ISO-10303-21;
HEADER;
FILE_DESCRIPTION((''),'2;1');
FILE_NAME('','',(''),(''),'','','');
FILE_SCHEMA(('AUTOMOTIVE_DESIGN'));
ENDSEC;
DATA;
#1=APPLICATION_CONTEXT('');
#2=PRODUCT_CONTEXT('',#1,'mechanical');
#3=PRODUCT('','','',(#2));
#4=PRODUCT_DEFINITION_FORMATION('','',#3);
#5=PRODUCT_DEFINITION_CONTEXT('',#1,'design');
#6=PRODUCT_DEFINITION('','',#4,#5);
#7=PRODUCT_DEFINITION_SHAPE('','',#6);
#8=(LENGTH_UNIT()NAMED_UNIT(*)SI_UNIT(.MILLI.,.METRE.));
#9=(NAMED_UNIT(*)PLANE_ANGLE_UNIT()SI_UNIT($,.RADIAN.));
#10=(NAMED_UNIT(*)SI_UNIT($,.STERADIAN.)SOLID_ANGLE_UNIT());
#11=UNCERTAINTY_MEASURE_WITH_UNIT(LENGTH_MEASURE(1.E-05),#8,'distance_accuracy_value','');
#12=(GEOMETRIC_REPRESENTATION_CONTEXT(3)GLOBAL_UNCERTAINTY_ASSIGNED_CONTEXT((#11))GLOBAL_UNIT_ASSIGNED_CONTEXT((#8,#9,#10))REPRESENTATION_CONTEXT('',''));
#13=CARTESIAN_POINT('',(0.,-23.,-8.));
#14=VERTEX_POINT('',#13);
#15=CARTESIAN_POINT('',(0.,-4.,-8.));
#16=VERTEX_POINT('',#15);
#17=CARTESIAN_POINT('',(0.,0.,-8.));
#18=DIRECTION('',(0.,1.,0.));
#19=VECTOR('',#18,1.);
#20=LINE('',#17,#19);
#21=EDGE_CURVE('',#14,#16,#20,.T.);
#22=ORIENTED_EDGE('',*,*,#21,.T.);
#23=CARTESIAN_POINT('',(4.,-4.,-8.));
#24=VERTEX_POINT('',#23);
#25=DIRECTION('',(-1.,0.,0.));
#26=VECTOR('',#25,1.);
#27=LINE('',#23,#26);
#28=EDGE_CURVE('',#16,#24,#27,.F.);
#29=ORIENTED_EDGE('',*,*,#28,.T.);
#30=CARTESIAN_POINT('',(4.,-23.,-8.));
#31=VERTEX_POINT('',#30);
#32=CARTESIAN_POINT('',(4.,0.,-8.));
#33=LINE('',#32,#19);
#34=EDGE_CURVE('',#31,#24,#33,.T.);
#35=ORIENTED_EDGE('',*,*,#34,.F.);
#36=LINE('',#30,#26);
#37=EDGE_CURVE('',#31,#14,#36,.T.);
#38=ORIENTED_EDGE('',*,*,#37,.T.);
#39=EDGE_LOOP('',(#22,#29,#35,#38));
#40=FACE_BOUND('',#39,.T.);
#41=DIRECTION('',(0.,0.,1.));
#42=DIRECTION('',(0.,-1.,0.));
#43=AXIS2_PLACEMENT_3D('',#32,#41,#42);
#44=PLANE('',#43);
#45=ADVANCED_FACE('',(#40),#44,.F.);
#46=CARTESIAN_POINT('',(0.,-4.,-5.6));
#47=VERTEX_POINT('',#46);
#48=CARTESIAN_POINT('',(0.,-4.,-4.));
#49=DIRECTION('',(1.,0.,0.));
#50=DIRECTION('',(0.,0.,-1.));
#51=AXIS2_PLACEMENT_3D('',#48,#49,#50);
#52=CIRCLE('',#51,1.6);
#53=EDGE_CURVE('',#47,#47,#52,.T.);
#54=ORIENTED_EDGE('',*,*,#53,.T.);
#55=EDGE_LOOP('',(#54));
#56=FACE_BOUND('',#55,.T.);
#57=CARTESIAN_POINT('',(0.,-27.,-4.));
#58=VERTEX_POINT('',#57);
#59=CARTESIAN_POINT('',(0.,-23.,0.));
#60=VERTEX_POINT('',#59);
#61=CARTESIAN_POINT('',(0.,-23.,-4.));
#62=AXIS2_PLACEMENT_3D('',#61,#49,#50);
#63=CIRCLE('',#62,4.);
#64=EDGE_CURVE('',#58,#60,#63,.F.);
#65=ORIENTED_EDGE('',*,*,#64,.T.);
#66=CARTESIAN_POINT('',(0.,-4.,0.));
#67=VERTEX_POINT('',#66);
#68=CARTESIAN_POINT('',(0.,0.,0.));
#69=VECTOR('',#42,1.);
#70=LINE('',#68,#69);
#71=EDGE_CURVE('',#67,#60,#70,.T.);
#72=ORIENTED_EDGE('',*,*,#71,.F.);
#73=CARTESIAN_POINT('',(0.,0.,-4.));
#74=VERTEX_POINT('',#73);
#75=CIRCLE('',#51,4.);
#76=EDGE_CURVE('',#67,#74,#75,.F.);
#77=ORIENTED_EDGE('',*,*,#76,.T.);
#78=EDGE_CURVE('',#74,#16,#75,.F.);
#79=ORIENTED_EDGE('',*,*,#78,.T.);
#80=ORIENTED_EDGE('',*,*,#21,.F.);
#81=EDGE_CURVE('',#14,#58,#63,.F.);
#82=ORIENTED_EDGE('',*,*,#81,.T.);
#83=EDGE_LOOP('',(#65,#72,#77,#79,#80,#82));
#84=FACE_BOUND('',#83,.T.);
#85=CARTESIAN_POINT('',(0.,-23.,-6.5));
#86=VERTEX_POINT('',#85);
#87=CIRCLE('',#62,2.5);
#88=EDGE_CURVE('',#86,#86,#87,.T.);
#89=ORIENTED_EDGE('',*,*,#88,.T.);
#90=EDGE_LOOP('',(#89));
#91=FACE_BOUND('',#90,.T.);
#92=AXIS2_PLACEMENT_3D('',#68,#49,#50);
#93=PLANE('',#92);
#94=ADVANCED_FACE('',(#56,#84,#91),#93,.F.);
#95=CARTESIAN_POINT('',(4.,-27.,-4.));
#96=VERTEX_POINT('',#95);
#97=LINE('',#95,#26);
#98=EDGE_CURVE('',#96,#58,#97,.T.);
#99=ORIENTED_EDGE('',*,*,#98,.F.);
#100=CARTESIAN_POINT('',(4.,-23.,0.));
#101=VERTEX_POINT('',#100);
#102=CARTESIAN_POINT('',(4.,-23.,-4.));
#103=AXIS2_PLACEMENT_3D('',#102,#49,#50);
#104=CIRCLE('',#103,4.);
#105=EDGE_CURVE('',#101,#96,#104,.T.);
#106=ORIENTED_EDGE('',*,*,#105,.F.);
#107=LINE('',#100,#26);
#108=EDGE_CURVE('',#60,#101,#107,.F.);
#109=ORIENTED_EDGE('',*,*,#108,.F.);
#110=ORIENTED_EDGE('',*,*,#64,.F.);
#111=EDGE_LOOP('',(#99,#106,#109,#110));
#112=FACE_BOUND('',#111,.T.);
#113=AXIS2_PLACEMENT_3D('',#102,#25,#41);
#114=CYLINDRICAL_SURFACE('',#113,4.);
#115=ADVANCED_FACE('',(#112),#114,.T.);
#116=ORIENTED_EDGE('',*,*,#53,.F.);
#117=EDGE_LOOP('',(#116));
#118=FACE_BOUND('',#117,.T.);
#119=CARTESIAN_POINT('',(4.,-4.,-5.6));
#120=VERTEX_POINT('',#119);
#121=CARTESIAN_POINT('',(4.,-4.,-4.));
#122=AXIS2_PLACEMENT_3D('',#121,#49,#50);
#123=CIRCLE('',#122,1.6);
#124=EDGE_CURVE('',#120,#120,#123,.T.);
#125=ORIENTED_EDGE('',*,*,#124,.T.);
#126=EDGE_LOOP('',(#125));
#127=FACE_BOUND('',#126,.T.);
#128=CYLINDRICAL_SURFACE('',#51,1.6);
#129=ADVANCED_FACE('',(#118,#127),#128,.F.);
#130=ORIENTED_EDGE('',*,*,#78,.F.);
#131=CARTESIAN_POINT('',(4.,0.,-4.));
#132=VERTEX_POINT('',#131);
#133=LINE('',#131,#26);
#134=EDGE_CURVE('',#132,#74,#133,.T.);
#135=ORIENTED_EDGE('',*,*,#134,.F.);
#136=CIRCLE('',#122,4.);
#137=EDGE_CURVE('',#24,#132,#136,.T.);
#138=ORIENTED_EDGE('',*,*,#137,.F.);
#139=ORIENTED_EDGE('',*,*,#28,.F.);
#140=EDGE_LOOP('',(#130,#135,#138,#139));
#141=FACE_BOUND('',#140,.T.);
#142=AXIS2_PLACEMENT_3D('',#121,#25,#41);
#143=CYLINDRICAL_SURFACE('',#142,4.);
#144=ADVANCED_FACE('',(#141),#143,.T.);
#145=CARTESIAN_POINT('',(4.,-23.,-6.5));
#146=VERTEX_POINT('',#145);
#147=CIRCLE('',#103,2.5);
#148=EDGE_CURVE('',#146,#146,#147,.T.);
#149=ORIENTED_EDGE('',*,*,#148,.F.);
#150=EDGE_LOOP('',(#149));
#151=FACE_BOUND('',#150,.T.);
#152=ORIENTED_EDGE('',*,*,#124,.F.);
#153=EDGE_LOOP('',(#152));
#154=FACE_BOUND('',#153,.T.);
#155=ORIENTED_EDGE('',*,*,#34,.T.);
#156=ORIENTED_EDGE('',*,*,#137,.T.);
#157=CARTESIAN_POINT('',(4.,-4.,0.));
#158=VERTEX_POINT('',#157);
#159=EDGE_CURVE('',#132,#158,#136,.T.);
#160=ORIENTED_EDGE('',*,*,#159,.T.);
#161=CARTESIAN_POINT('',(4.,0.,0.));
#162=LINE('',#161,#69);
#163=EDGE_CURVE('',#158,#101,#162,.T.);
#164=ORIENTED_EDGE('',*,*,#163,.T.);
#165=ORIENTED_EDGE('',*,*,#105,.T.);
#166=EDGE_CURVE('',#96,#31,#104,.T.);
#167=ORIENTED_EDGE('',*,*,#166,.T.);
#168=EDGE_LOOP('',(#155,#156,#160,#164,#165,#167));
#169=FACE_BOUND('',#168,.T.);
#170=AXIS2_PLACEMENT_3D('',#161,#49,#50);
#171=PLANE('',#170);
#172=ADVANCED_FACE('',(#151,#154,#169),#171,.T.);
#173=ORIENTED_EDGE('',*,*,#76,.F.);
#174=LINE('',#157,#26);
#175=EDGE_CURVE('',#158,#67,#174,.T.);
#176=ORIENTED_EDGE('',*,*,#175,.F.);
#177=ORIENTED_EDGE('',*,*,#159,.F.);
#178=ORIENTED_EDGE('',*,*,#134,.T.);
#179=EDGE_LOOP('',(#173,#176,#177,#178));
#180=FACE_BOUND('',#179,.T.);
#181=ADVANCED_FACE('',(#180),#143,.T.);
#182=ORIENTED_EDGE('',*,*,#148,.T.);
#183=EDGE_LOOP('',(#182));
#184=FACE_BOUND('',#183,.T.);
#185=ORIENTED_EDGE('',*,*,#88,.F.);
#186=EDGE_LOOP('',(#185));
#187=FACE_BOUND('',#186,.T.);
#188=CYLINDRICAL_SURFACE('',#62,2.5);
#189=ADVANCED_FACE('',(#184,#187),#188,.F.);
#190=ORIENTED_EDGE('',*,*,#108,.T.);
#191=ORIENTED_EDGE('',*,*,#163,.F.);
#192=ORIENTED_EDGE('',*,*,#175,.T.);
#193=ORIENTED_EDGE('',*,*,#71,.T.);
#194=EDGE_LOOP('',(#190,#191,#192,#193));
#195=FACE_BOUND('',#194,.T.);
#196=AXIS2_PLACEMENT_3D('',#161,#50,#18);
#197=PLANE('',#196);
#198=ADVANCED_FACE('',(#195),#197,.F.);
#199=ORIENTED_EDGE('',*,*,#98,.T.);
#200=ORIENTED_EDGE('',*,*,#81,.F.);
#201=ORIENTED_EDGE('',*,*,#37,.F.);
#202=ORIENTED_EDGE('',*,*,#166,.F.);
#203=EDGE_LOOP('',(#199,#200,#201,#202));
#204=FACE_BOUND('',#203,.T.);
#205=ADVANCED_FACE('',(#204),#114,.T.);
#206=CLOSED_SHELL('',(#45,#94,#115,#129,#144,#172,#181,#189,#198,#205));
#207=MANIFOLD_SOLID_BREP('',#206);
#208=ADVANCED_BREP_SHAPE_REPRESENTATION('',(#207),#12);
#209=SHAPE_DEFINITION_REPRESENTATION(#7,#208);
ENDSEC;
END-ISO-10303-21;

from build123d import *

# Parameters (mm, degrees)
SKETCH1_W           = 8
SKETCH1_H           = 27
BOSS_EXTRUDE1_DEPTH = 4
SKETCH2_R           = 2.5
SKETCH2_R_2         = 1.6
CUT_EXTRUDE1_DEPTH  = 29.442925307
FILLET1_R           = 4


with BuildPart() as part:
    # Sketch1 → Boss-Extrude1 (new body)
    with BuildSketch(Plane(origin=(0, 0, 0), x_dir=(0, 0, -1), z_dir=(1, 0, 0))):
        with Locations((4, -13.5)):
            Rectangle(SKETCH1_W, SKETCH1_H)
    extrude(amount=BOSS_EXTRUDE1_DEPTH)

    # Sketch2 → Cut-Extrude1 (cut, through all)
    with BuildSketch(Plane(origin=(4, 0, 0), x_dir=(0, 0, -1), z_dir=(1, 0, 0))):
        with Locations((4, -23)):
            Circle(SKETCH2_R)
        with Locations((4, -4)):
            Circle(SKETCH2_R_2)
    extrude(amount=-CUT_EXTRUDE1_DEPTH, mode=Mode.SUBTRACT)

    # Fillet1
    fillet1_edges = [part.edges().sort_by_distance(p)[0] for p in [
        (2, -27, -8),
        (2, -27, 0),
        (2, 0, 0),
        (2, 0, -8),
    ]]
    fillet(fillet1_edges, radius=FILLET1_R - 0.0001)  # a hair under: the kernel refuses the full size


solid = part.part
